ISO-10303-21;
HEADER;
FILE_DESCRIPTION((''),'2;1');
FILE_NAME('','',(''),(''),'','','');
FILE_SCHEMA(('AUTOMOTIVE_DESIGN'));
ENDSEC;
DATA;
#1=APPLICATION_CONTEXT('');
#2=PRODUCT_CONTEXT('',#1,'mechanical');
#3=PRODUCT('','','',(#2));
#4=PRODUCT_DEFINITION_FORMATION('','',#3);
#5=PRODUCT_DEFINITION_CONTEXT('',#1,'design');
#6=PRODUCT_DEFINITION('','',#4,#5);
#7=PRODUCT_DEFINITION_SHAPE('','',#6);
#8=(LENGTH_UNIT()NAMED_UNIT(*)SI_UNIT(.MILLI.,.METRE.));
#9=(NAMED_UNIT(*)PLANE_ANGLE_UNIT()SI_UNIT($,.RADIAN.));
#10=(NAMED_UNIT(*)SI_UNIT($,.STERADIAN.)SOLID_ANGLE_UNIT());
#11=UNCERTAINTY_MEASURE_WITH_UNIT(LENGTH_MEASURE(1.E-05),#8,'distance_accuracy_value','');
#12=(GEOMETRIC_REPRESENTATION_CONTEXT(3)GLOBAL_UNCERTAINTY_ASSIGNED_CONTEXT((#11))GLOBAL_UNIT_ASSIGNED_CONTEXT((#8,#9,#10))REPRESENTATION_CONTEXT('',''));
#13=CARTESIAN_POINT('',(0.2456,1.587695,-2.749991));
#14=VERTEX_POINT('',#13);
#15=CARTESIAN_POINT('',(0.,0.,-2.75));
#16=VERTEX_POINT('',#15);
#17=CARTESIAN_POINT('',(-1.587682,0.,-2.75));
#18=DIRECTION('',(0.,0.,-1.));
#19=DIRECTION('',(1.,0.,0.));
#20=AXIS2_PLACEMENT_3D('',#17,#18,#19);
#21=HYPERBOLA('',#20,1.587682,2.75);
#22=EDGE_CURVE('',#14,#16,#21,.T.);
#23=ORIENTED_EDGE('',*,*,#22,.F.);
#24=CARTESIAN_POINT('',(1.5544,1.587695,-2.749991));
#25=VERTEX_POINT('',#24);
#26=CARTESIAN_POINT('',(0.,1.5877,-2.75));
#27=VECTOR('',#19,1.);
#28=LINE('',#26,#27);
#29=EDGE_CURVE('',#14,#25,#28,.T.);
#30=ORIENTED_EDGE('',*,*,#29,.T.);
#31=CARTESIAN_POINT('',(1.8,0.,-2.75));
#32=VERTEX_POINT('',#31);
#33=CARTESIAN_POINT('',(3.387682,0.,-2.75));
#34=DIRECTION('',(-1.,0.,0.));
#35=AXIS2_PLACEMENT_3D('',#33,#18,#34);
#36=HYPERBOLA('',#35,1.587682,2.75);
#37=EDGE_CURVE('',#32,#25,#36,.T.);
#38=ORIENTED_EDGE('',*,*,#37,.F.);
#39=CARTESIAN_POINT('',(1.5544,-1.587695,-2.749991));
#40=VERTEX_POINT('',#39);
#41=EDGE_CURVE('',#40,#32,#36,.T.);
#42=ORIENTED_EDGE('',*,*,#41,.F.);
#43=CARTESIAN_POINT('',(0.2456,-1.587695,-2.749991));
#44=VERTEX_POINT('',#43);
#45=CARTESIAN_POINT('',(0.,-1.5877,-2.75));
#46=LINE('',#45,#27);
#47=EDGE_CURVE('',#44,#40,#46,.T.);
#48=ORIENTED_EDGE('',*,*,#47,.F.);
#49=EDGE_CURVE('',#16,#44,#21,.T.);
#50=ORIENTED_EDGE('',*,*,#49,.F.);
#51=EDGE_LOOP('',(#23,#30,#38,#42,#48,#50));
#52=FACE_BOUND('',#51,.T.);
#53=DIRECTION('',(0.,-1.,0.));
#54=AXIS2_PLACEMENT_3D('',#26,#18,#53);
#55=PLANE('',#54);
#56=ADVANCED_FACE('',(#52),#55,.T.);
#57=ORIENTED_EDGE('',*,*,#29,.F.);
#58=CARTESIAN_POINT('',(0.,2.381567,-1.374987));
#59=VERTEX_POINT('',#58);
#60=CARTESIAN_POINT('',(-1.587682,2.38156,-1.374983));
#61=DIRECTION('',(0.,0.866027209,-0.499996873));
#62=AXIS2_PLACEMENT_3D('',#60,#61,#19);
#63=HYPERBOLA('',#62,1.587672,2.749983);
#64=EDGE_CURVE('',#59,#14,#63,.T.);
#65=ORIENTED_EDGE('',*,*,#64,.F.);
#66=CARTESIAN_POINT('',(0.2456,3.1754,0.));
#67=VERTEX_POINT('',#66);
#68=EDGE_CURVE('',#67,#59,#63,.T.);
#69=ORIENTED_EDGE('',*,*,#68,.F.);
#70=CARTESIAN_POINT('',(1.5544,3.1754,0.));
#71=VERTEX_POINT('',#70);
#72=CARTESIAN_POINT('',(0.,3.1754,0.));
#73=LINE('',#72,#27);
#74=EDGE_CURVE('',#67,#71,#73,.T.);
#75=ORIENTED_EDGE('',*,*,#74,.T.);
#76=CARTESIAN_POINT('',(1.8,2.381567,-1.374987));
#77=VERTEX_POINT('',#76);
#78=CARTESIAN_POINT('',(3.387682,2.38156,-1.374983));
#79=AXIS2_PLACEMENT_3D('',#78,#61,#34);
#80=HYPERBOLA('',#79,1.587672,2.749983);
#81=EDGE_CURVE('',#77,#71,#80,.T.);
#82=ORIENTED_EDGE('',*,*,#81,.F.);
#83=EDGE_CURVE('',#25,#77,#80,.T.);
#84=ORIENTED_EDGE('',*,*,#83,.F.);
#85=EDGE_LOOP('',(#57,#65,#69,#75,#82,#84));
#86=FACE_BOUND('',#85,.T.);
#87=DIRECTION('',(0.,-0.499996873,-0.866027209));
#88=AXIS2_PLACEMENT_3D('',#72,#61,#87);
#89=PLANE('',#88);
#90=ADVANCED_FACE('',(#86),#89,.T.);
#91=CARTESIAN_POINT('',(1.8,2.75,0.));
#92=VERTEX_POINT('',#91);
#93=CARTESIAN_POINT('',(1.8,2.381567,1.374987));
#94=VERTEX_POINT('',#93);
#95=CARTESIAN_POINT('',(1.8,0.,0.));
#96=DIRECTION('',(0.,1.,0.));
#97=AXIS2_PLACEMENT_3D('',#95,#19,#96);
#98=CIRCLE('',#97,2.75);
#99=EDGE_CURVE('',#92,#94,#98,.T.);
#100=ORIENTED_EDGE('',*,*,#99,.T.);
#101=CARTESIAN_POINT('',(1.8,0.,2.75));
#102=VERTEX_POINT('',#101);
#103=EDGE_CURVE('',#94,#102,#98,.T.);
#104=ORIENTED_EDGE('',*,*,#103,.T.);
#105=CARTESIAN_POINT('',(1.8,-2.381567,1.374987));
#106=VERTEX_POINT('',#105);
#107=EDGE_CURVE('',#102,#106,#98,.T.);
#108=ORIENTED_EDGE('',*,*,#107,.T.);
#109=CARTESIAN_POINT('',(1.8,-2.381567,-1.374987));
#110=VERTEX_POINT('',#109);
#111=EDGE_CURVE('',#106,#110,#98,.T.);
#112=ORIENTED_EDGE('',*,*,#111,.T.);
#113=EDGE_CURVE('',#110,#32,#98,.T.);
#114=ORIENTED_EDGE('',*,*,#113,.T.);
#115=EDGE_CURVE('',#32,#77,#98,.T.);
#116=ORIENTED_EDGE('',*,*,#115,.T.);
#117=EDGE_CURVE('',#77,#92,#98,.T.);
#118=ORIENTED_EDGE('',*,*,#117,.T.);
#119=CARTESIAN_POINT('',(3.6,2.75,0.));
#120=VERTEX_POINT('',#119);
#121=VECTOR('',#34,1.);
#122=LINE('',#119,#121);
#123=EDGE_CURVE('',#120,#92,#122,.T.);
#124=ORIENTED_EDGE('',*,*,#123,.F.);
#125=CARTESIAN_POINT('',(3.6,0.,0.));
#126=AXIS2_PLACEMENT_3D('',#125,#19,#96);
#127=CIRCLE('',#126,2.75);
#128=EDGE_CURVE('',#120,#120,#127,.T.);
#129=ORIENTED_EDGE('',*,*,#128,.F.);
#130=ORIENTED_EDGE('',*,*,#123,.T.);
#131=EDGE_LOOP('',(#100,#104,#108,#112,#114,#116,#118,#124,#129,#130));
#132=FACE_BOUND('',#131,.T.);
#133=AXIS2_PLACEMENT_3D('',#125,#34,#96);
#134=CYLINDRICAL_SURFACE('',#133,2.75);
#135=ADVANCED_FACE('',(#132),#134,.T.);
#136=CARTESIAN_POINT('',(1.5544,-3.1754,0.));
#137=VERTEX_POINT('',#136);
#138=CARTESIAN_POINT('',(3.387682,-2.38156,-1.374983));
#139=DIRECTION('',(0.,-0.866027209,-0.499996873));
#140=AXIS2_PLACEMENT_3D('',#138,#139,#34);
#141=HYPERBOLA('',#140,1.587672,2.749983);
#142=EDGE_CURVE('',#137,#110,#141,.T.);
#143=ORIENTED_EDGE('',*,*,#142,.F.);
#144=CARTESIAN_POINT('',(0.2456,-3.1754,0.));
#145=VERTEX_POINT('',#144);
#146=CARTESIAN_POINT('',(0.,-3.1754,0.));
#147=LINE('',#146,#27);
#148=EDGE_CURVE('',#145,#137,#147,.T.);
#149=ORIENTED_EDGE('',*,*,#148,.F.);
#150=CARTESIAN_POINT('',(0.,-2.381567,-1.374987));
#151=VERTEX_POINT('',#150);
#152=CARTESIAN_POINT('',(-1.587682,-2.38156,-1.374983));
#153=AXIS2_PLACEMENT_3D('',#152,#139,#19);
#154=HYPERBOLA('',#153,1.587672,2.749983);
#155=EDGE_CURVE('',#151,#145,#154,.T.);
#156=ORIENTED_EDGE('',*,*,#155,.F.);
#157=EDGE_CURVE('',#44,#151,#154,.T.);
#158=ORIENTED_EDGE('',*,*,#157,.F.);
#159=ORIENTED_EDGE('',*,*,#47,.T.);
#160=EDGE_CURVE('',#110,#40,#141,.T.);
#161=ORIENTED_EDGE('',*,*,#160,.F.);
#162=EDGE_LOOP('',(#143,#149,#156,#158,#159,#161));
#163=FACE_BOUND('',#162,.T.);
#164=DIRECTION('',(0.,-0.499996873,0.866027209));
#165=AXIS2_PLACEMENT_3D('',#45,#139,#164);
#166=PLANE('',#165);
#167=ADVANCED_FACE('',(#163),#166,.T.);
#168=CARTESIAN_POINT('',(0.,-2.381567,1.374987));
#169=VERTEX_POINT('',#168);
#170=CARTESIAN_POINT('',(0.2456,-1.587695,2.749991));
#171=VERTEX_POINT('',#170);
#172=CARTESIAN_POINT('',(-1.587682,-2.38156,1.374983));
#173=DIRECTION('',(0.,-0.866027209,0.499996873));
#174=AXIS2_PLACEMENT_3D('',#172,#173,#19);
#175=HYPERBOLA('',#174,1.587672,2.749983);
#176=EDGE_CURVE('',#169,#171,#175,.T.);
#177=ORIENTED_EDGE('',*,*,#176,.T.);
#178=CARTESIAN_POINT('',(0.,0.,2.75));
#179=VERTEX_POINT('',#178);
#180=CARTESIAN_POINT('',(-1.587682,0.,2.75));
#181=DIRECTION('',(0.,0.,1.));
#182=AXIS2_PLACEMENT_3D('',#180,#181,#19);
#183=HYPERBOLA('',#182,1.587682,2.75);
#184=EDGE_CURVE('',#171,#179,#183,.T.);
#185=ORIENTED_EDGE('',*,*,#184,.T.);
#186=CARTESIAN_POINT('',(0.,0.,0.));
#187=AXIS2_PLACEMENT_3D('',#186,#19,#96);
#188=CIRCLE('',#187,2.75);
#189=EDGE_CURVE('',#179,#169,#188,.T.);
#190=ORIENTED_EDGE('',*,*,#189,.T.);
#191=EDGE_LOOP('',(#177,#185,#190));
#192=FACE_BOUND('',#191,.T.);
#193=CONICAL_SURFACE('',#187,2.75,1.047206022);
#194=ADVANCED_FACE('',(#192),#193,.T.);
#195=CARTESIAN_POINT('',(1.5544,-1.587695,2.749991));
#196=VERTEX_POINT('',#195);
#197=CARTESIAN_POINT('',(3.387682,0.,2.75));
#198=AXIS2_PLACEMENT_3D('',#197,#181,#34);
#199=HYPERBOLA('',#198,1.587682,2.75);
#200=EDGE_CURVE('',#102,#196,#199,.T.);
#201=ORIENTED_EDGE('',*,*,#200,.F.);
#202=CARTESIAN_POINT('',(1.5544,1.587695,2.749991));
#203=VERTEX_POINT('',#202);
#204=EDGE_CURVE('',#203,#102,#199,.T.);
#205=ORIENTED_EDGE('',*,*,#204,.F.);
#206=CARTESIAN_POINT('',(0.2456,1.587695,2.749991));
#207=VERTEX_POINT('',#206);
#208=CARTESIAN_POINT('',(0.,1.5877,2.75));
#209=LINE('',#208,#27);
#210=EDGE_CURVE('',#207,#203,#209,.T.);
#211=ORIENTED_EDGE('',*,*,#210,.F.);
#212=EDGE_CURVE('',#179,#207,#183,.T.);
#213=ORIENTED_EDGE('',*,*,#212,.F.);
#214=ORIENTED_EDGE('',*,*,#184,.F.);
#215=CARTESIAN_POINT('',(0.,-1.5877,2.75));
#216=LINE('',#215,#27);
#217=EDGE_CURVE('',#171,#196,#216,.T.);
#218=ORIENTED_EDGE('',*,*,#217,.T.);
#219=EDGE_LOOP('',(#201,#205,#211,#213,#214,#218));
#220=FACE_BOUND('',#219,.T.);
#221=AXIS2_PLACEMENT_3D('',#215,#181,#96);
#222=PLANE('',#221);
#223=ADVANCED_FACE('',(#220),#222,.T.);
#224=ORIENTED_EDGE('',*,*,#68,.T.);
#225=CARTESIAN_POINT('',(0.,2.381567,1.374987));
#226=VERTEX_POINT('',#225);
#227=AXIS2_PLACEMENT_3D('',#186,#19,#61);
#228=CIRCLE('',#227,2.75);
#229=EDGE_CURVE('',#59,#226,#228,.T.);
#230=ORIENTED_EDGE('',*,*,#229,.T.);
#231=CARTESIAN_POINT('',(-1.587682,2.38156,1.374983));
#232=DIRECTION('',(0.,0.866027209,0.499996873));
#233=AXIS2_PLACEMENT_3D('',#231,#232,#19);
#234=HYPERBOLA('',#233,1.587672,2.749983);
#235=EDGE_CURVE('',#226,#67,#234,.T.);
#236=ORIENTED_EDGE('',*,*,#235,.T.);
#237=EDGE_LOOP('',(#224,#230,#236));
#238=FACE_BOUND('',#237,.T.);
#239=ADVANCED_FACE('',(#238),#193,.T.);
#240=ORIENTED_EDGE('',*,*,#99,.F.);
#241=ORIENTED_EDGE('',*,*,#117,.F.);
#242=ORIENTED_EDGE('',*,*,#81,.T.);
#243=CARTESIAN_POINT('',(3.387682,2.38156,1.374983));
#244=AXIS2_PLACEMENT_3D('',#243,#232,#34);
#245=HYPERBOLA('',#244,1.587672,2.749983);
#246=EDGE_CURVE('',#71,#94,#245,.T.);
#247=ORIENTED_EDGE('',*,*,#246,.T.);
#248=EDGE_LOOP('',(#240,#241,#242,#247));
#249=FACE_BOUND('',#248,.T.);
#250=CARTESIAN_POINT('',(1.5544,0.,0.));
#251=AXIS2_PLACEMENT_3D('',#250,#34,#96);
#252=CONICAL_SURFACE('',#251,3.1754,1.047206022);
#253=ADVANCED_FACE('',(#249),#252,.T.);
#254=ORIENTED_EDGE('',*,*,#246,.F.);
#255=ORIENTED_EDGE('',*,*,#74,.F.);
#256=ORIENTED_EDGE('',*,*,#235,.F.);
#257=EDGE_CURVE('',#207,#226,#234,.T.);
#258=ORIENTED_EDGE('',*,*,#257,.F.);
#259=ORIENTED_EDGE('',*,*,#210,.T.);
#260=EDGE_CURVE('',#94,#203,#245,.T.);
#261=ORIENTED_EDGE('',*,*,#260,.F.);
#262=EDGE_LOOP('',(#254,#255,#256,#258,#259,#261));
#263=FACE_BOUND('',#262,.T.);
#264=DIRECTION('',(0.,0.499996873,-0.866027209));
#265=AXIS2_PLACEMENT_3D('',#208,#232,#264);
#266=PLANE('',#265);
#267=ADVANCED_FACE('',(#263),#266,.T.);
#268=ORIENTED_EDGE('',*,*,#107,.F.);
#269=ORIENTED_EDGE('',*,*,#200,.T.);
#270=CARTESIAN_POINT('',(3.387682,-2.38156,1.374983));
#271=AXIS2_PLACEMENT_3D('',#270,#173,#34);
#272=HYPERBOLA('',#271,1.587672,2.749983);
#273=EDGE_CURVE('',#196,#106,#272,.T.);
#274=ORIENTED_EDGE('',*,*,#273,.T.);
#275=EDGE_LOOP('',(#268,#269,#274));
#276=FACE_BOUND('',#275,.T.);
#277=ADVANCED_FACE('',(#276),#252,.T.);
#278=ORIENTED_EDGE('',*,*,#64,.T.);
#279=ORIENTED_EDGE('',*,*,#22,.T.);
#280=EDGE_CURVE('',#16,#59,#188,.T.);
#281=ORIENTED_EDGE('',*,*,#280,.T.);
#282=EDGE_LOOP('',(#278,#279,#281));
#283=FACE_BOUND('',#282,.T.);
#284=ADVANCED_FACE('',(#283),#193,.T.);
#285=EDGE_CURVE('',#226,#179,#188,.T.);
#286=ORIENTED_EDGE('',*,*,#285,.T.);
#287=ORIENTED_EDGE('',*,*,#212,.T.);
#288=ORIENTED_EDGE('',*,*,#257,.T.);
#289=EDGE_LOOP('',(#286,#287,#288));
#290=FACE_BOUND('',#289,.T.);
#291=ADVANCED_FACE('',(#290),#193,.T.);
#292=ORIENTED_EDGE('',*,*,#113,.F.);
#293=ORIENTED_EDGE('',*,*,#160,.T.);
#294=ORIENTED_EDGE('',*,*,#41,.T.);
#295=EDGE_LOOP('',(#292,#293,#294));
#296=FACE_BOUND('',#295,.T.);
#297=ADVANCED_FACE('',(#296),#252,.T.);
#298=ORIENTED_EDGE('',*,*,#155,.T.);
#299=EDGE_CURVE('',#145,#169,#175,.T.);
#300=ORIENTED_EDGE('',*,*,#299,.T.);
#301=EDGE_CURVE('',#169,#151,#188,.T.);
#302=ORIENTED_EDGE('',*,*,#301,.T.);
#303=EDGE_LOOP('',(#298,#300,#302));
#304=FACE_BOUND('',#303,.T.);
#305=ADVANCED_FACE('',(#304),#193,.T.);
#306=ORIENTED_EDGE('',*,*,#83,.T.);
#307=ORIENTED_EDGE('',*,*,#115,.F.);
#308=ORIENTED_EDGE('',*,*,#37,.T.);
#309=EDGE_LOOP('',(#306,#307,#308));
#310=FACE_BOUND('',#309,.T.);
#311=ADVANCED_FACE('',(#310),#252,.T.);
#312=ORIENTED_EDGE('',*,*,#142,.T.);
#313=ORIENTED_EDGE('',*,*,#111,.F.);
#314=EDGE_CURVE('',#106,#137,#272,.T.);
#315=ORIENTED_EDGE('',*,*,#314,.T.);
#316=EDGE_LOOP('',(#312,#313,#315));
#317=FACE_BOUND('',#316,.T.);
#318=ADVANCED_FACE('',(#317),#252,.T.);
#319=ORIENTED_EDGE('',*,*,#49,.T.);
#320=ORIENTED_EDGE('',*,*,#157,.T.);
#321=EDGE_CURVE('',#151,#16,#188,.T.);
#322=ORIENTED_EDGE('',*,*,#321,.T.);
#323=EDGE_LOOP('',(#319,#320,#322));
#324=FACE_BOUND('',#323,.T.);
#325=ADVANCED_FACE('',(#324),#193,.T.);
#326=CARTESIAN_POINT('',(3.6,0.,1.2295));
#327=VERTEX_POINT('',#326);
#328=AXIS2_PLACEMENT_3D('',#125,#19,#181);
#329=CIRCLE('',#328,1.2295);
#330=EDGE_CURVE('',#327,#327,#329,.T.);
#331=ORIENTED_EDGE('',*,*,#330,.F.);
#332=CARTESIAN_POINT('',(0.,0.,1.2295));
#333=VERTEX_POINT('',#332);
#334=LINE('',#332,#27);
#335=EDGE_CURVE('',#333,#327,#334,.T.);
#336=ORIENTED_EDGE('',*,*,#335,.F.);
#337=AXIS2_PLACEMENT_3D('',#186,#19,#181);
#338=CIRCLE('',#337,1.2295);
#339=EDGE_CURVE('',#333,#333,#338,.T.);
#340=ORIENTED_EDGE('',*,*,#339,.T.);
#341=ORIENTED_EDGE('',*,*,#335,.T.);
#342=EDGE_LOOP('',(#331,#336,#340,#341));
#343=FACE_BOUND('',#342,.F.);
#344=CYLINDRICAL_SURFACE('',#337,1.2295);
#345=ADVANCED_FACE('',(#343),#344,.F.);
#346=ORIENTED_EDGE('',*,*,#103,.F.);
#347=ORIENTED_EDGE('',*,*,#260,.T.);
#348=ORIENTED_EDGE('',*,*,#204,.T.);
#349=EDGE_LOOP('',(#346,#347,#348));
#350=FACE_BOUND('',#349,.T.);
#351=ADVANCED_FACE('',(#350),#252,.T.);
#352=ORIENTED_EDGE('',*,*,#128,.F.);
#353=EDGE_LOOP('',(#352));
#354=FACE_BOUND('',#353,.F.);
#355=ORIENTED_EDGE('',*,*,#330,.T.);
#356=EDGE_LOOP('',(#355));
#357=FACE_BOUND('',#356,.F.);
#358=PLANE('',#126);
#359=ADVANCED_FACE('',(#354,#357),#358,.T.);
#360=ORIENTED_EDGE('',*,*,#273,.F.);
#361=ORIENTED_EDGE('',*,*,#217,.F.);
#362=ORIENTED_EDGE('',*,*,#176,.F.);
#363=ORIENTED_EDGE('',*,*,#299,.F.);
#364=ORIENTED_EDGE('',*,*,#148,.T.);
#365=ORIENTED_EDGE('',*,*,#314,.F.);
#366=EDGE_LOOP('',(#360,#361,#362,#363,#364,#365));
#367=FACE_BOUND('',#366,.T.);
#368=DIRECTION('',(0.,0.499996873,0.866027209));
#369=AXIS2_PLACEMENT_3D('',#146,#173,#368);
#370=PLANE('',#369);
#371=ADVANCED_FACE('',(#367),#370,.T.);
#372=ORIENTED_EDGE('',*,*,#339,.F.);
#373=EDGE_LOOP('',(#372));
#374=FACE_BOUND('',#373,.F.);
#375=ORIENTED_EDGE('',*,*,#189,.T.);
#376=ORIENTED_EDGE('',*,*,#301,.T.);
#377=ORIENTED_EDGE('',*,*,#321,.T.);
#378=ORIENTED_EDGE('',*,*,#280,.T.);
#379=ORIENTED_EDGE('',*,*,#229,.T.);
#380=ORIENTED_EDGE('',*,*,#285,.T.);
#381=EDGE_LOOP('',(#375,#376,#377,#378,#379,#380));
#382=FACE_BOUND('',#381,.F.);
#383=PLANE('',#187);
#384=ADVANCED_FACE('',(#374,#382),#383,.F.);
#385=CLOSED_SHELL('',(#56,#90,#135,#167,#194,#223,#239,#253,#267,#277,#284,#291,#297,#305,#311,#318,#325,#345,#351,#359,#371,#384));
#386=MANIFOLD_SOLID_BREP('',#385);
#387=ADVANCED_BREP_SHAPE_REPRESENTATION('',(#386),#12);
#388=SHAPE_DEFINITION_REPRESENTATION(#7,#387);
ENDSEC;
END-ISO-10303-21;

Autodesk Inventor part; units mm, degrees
ref_plane "YZ Plane" through (0, 0, 0) normal (1, 0, 0) x (0, 1, 0)
ref_plane "XZ Plane" through (0, 0, 0) normal (0, 1, 0) x (-1, 0, 0)
sketch "Szkic1" plane through (0, 0, 0) normal (1, 0, 0) x (0, 1, 0)
  line L0 (3.1754, 0) -> (1.5877, -2.75)
  line L1 (1.5877, -2.75) -> (-1.5877, -2.75)
  line L2 (-1.5877, -2.75) -> (-3.1754, 0)
  line L3 (-3.1754, 0) -> (-1.5877, 2.75)
  line L4 (-1.5877, 2.75) -> (1.5877, 2.75)
  line L5 (1.5877, 2.75) -> (3.1754, 0)
  point P0 (0, 0)
  point P1 (0, 0)
  dimension "d0" = 5.5
extrude "Głowica" add sketch "Szkic1" along normal blind 1.8
sketch "Szkic2" plane through (0, 0, 0) normal (0, 0, 1) x (1, 0, 0)
  line L0 (3.6, 0) -> (3.6, 2.75)
  line L1 (3.6, 2.75) -> (1.8, 2.75)
  line L2 (1.8, 0) -> (3.6, 0)
  line L3 (0, -0.55) -> (0, 3.3) projected
  line L4 (1.8, 0) -> (1.8, 2.75)
  line L5 (1.44, 0) -> (3.96, 0) projected
  dimension "d3" = 5.5
  dimension "d4" = 5.5
  dimension "d5" = 3.6
  dimension "d6" = 1.8
revolve "Bryła" add sketch "Szkic2" angle 360 about axis through (1.8, 0, 0) along (1, 0, 0)
sketch "Szkic3" plane through (0, 0, 0) normal (-1, 0, 0) x (0, 0, 1)
  point P0 (0, 0)
hole "Gwint" at (0, 0, 0) direction (1, 0, 0) diameter 2.459 end through all thread size "M3x0.5" class "6H" standard "ISO Metric profile"
sketch "Szkic4" plane through (0, 0, 0) normal (0, 0, 1) x (1, 0, 0)
  line L0 (1.8, 2.75) -> (1.8, 3.1754)
  line L1 (1.8, 3.1754) -> (1.5544, 3.1754)
  line L2 (1.5544, 3.1754) -> (1.8, 2.75)
  line L3 (0.2456, 3.1754) -> (0, 3.1754)
  line L4 (0, 3.1754) -> (0, 2.75)
  line L5 (0, 2.75) -> (0.2456, 3.1754)
  line L6 (1.8, 3.1754) -> (1.8, 2.3816) projected
  line L7 (0, 3.1754) -> (1.8, 3.1754) projected
  line L8 (0, 3.1754) -> (0, 1.5877) projected
  line L9 (-0.36, 0) -> (2.16, 0) projected
  dimension "d7" = 5.5
  dimension "d8" = 5.5
  dimension "d9" = 30
  dimension "d10" = 30
revolve "Faza1" cut sketch "Szkic4" angle 360 about axis through (-10, 0, 0) along (1, 0, 0)
ref_plane "Work Plane1" through (9.1402, 0, 0) normal (0, 0, -1) x (-1, 0, 0)
equation "\"d0\" = SW"
equation "\"d1\" = KOH1"
equation "\"d3\" = SW"
equation "\"d4\" = SW0"
equation "\"d5\" = KOH"
equation "\"d6\" = KOH1"
equation "\"d7\" = SW"
equation "\"d8\" = SW"
equation "\"d9\" = ANG1"
equation "\"d10\" = ANG2"
equation "\"SW\" = 5.5"
equation "\"KOH\" = 3.6"
equation "\"SW0\" = SW"
equation "\"ANG1\" = 30deg"
equation "\"ANG2\" = 30deg"
equation "\"KOH1\" = 1.8"
equation "\"GUL\" = 0.541266 * PTC"
equation "\"WFT\" = 0.4"
equation "\"PDM\" = 4.8"
equation "\"SDH\" = SW"
equation "\"TOA\" = 30deg"
equation "\"PTC\" = 0.5"
equation "\"NND\" = 3"
equation "\"THREADDIA\" = 3"
equation "\"GAL\" = 0.541266 * PTC"
equation "\"E0\" = 1.155 * SW"
properties part number "AS 1285 - M3" material "Stal, miękka"
